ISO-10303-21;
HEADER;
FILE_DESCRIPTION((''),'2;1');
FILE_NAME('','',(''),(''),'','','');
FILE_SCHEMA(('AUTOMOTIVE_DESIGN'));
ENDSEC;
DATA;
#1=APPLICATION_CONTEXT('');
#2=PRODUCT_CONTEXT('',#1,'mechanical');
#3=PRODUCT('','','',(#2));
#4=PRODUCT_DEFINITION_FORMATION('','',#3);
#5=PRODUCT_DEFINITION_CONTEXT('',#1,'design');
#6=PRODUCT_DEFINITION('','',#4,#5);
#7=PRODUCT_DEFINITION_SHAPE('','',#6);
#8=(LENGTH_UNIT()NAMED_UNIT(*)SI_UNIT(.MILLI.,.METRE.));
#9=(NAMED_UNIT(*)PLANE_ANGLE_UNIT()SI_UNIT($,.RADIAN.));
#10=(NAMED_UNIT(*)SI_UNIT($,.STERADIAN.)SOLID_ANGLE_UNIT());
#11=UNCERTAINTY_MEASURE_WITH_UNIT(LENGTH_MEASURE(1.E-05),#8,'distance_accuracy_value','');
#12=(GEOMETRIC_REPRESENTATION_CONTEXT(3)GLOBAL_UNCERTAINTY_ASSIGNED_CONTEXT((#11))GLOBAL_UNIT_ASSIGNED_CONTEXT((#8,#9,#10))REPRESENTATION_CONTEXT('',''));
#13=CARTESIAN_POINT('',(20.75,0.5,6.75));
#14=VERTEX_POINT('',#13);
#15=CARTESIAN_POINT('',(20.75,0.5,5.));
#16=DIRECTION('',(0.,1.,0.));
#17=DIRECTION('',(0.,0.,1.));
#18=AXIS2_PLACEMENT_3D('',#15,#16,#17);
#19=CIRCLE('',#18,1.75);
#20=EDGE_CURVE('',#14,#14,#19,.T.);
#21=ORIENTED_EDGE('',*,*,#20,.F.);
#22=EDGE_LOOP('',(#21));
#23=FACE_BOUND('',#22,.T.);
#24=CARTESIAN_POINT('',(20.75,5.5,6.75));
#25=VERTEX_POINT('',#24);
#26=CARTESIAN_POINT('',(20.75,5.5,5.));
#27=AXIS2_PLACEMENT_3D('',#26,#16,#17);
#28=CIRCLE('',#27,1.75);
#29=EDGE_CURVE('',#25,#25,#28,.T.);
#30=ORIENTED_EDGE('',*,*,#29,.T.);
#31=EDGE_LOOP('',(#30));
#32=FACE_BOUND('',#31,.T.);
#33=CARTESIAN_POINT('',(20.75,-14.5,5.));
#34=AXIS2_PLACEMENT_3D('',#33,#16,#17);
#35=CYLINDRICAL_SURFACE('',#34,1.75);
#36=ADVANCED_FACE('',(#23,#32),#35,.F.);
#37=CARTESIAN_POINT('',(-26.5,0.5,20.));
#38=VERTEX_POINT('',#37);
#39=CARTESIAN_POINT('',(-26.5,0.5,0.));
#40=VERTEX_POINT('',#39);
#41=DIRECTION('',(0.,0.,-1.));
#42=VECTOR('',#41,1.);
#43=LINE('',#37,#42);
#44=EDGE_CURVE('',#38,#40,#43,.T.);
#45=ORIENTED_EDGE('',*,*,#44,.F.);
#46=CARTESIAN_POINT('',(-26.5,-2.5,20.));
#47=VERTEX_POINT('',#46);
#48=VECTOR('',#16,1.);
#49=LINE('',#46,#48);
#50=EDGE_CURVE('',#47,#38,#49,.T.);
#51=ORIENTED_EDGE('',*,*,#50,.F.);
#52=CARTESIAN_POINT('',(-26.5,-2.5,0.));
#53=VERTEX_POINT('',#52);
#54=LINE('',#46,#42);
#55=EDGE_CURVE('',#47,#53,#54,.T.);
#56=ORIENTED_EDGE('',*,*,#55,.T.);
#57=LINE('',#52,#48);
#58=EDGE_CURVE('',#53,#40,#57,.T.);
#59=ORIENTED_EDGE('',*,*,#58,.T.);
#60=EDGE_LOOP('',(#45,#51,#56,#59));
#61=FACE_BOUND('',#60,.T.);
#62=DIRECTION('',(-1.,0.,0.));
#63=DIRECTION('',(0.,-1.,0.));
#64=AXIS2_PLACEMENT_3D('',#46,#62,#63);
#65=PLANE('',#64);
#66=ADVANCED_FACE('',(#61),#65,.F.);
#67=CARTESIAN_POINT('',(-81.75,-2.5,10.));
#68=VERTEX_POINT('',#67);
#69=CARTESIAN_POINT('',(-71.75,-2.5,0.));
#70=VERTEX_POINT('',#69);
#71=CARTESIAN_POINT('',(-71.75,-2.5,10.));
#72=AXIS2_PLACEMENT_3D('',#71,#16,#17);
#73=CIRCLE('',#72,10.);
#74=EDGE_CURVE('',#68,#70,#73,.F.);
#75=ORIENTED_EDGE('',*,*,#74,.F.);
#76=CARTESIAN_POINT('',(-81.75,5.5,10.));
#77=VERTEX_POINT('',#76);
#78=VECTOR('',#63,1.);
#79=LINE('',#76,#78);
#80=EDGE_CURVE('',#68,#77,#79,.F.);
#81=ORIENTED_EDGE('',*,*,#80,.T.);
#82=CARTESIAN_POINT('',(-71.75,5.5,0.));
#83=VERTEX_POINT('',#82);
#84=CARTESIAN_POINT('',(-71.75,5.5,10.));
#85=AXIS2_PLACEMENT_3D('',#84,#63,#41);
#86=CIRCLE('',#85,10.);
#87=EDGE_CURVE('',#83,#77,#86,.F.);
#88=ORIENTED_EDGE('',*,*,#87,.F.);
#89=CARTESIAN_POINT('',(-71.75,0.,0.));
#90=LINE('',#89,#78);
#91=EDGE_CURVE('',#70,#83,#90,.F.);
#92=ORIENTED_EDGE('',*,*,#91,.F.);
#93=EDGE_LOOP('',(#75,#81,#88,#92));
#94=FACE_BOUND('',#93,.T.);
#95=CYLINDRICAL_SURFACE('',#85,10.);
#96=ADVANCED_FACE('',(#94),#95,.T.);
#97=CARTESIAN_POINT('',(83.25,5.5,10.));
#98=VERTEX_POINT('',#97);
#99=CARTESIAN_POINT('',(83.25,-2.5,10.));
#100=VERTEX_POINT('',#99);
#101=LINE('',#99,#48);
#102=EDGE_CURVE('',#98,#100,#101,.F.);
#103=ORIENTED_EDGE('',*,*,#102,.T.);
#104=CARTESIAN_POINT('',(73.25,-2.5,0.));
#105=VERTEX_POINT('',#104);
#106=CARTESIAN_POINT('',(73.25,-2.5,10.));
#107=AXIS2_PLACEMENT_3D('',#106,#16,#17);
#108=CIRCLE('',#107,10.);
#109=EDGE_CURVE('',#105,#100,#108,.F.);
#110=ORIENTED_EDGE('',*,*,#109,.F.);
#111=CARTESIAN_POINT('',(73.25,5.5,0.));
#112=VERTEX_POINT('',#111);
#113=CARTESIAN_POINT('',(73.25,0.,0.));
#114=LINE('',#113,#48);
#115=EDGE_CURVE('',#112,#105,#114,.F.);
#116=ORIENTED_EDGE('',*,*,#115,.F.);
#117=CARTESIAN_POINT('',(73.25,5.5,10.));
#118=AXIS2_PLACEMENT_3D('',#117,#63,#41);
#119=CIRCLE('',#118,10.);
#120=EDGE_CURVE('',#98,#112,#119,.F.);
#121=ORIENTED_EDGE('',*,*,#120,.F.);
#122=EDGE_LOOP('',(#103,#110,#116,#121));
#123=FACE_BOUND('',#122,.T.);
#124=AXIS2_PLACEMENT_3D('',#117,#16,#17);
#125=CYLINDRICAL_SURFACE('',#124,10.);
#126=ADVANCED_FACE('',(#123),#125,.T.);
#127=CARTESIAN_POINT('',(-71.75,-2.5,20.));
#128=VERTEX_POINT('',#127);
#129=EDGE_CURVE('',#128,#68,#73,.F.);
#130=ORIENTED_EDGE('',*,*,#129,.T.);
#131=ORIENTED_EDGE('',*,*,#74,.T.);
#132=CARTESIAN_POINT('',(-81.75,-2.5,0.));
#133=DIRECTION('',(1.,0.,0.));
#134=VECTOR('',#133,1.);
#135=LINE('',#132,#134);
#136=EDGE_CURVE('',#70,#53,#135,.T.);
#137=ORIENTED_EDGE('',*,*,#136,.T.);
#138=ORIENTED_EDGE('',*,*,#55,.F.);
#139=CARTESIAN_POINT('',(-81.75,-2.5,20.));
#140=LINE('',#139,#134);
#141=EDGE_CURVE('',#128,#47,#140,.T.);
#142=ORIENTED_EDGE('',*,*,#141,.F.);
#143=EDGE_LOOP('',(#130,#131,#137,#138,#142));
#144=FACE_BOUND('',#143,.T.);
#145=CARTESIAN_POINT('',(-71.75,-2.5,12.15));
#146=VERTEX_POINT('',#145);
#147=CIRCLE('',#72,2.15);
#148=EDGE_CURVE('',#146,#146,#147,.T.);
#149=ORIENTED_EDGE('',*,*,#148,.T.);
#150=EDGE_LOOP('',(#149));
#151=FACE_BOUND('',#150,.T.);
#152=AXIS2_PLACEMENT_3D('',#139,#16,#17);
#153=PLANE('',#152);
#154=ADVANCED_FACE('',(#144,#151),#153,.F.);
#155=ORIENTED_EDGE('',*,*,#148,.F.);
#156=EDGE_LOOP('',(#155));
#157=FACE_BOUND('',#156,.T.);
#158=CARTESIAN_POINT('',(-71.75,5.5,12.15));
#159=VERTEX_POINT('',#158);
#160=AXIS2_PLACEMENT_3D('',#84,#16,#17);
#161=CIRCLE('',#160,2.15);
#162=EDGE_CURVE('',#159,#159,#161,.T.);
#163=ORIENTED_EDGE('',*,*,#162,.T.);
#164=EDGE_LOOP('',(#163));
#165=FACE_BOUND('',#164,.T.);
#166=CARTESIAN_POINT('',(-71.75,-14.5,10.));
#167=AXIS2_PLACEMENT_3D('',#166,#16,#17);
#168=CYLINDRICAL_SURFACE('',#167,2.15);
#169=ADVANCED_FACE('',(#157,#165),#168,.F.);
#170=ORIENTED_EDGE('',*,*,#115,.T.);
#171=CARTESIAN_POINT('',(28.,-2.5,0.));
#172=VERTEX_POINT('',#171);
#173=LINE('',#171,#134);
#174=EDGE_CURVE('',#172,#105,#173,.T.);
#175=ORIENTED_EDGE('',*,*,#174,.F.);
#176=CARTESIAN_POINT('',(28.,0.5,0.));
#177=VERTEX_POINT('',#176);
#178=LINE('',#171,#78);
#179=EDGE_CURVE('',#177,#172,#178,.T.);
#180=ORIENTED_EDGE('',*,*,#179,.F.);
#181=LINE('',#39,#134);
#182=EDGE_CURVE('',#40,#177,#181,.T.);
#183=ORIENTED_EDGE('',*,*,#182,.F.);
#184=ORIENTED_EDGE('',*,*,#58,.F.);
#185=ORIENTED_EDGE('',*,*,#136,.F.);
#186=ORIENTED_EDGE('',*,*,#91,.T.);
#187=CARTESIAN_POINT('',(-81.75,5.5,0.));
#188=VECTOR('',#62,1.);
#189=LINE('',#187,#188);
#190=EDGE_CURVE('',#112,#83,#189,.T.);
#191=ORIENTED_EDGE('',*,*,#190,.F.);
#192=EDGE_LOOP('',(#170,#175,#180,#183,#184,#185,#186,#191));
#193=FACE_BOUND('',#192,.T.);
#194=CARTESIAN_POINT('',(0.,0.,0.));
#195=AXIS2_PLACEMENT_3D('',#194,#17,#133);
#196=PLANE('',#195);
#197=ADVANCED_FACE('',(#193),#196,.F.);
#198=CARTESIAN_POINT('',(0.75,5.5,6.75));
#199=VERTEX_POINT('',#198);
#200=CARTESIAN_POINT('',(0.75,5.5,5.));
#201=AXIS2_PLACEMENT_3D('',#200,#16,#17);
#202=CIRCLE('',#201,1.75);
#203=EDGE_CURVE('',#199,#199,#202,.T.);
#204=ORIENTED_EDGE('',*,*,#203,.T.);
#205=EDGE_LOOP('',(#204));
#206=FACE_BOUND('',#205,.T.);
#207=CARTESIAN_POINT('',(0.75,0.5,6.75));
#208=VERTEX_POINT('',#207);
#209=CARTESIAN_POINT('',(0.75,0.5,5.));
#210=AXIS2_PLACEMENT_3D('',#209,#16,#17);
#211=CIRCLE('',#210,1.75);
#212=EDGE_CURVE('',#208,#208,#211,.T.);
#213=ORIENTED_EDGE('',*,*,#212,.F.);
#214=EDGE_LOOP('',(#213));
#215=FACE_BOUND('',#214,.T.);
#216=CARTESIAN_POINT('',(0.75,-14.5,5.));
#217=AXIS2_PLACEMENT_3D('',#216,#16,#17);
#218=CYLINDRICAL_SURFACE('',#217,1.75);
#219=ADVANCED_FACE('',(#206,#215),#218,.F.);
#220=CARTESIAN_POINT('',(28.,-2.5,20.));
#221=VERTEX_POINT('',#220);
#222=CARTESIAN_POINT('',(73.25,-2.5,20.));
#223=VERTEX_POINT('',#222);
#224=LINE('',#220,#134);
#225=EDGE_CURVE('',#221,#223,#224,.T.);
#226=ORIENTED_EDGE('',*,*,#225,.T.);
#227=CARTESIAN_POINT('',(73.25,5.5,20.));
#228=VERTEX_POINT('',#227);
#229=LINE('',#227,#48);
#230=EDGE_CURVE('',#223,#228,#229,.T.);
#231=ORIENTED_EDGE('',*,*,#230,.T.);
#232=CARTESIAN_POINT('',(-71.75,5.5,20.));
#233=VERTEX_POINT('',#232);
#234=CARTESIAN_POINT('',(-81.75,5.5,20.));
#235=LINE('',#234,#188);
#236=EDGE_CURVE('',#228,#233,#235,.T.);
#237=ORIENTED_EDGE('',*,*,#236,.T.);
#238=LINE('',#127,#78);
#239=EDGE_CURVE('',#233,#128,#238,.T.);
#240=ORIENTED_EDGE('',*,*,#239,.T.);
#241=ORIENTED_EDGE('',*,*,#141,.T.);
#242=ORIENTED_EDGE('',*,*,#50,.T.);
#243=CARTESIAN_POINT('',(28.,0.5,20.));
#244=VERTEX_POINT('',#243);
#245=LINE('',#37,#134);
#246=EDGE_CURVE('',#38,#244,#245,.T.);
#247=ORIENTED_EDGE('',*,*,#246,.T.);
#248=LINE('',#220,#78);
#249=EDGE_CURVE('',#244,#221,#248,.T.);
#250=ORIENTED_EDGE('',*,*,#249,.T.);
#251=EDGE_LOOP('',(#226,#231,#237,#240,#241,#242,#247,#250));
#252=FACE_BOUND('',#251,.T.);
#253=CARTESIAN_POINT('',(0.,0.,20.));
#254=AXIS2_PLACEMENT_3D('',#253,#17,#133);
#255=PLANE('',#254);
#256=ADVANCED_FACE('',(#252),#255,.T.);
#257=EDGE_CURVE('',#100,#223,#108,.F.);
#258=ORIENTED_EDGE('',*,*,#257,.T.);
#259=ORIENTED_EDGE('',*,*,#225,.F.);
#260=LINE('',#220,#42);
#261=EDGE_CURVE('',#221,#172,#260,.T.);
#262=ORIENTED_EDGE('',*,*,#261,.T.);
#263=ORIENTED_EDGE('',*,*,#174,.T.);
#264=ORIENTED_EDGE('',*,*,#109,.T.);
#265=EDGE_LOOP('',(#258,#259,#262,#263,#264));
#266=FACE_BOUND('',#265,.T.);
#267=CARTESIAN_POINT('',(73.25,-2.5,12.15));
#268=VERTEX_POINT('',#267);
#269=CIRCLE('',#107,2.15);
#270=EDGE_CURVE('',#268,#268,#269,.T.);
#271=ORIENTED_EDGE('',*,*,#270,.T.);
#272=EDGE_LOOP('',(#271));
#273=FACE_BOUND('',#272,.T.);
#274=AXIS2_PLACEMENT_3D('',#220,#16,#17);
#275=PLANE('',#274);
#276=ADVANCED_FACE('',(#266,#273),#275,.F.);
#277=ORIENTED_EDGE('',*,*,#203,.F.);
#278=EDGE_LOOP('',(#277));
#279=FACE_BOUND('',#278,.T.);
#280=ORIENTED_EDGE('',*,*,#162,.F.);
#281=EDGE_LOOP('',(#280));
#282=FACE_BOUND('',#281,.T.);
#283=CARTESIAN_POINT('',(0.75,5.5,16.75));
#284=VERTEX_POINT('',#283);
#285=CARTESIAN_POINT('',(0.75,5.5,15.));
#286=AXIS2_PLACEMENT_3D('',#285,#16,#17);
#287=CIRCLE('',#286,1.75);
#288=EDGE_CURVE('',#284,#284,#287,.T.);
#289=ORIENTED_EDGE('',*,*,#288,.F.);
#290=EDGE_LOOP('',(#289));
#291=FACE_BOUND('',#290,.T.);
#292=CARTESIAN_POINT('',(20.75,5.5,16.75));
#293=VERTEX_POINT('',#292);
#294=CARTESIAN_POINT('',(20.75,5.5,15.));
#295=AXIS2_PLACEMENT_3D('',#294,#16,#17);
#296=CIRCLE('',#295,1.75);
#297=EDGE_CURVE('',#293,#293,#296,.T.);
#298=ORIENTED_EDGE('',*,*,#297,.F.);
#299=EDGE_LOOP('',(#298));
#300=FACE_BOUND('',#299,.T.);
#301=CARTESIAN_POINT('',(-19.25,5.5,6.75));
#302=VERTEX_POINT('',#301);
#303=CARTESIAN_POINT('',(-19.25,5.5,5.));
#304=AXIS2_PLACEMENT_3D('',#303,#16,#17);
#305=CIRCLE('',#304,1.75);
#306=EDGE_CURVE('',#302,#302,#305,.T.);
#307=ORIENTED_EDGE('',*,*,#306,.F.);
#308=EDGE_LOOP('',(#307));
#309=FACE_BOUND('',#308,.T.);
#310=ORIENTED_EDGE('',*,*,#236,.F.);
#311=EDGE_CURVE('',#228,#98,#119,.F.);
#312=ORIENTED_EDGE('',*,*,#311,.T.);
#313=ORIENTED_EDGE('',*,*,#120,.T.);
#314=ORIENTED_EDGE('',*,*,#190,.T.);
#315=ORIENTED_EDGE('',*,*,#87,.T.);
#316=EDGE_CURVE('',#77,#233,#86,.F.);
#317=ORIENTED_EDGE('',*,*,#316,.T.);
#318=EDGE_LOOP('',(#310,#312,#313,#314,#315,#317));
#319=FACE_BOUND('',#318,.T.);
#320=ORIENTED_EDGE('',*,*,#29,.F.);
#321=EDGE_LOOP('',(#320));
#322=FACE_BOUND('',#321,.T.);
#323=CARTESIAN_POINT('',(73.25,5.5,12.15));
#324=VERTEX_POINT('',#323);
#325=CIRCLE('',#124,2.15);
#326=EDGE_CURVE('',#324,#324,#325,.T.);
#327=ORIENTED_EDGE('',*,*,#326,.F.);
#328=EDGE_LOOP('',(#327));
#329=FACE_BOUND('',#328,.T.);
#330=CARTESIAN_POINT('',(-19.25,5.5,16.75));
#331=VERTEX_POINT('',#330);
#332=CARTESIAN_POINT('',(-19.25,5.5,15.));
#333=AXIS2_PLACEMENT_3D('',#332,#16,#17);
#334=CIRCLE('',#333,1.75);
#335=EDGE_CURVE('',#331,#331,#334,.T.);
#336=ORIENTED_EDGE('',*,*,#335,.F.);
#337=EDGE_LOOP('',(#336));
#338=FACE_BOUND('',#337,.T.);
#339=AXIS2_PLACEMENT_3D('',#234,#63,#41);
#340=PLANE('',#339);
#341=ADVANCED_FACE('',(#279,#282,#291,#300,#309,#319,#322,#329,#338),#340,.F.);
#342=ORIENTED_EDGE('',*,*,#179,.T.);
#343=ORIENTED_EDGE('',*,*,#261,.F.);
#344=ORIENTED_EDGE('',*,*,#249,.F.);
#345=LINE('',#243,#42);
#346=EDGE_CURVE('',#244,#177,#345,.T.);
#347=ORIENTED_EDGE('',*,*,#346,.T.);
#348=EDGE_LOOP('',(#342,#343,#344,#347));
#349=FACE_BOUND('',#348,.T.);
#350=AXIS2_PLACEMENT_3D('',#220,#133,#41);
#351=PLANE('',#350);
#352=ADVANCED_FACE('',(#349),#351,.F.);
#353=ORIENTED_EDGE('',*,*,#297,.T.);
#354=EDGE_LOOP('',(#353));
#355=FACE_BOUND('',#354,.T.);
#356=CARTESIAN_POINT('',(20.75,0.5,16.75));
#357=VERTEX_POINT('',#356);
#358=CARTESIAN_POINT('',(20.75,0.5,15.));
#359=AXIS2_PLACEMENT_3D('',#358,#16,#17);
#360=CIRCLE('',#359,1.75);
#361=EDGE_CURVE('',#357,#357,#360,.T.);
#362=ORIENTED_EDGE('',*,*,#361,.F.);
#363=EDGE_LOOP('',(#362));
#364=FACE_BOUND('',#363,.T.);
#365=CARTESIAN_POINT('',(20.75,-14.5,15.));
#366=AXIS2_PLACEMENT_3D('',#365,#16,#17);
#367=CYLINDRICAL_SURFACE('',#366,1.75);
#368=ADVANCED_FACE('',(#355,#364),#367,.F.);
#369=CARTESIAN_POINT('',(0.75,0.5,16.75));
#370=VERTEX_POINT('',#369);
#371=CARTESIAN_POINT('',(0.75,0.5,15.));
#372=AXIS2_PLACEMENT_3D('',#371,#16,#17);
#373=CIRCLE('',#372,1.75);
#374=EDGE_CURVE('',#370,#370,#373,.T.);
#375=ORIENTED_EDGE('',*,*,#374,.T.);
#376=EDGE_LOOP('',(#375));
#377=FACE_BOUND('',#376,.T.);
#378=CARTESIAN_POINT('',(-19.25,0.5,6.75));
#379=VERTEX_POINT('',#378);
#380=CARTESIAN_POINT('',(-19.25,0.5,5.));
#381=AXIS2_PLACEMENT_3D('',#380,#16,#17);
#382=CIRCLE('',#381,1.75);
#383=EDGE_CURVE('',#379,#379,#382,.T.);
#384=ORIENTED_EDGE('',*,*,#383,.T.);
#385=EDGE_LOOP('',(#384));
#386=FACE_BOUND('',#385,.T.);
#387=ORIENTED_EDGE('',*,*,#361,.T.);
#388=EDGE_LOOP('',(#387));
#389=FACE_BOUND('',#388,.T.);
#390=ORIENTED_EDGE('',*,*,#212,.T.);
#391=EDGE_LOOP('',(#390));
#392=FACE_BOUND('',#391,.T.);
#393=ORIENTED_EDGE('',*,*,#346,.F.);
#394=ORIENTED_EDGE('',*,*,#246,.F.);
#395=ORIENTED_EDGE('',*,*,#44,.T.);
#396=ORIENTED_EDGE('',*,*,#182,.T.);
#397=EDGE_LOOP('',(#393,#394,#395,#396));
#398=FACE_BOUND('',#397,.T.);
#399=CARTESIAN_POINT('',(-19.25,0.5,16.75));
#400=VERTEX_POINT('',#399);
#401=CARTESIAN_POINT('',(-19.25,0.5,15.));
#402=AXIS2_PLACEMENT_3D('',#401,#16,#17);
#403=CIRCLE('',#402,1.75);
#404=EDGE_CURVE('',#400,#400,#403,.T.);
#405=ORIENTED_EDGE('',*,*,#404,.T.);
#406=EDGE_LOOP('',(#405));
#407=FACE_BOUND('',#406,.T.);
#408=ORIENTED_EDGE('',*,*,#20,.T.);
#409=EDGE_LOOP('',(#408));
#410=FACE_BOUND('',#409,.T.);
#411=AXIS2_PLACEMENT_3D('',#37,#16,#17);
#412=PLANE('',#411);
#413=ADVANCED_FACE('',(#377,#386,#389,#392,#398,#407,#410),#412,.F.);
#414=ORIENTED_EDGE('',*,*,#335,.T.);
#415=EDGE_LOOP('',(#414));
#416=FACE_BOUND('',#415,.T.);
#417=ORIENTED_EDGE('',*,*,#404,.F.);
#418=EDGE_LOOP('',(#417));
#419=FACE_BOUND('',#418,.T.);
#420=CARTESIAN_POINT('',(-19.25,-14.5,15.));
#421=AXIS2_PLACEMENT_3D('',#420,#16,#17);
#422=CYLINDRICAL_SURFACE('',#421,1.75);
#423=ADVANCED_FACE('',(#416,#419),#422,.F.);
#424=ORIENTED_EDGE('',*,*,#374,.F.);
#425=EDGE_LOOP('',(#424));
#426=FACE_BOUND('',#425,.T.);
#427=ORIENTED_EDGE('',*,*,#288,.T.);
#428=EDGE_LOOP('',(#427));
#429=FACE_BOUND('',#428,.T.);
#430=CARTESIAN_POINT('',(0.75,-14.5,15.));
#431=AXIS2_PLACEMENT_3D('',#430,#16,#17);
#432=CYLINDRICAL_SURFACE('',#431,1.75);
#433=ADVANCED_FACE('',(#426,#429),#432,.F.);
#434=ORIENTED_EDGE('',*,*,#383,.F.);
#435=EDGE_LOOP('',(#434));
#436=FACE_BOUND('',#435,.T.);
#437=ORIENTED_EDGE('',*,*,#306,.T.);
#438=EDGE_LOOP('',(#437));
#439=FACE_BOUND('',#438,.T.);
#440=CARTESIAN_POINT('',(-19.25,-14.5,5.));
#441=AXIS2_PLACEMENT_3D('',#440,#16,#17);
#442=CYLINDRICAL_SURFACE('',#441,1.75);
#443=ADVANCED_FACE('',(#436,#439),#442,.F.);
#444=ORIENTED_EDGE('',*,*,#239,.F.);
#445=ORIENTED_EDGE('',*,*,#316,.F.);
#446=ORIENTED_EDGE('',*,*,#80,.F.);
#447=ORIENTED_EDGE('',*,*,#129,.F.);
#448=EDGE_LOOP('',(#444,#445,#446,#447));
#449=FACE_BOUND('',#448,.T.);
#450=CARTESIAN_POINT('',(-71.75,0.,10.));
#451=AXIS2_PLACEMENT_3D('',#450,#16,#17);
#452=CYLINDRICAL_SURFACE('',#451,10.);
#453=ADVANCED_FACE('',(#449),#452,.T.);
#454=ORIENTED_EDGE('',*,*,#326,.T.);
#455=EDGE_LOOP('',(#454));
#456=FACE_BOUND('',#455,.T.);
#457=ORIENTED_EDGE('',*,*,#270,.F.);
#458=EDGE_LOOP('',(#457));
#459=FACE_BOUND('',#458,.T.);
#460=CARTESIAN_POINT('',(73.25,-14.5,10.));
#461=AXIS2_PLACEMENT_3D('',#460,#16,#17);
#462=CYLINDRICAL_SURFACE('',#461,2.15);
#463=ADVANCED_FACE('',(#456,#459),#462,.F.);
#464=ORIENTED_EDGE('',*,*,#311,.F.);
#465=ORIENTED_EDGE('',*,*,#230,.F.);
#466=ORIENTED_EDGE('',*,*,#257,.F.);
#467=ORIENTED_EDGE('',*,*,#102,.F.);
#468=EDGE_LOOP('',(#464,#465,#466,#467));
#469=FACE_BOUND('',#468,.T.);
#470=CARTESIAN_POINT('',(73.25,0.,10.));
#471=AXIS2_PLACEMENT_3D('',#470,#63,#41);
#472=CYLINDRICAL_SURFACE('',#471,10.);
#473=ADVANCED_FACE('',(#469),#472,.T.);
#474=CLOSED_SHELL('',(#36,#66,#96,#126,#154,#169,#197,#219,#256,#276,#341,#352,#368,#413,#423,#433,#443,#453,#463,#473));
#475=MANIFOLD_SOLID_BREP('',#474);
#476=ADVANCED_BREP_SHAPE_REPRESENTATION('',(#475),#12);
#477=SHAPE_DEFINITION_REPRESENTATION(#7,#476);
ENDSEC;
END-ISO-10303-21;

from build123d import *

# Parameters (mm, degrees)
EXTRUDE_1_DEPTH     = 20
SKETCH_2_R          = 2.15
SKETCH_2_R_2        = 1.75
CUT_EXTRUDE_1_DEPTH = 20
FILLET_1_R          = 10


with BuildPart() as part:
    # 스케치1 → 보스-돌출1 (new body)
    with BuildSketch(Plane.XY):
        Polygon((28, -2.5), (83.25, -2.5), (83.25, 5.5), (-81.75, 5.5), (-81.75, -2.5), (-26.5, -2.5), (-26.5, 0.5), (28, 0.5), align=None)
    extrude(amount=EXTRUDE_1_DEPTH)

    # 스케치2 → 컷-돌출1 (cut)
    with BuildSketch(Plane(origin=(0, 5.5, 0), x_dir=(1, 0, 0), z_dir=(0, 1, 0))):
        with Locations(Location((-71.75, -10, 0), (0, 0, 270))):
            Circle(SKETCH_2_R)
        with Locations(Location((73.25, -10, 0), (0, 0, 270))):
            Circle(SKETCH_2_R)
        with Locations(Location((-19.25, -5, 0), (0, 0, 270))):
            Circle(SKETCH_2_R_2)
        with Locations(Location((0.75, -5, 0), (0, 0, 270))):
            Circle(SKETCH_2_R_2)
        with Locations(Location((20.75, -5, 0), (0, 0, 270))):
            Circle(SKETCH_2_R_2)
        with Locations(Location((20.75, -15, 0), (0, 0, 270))):
            Circle(SKETCH_2_R_2)
        with Locations(Location((0.75, -15, 0), (0, 0, 270))):
            Circle(SKETCH_2_R_2)
        with Locations(Location((-19.25, -15, 0), (0, 0, 270))):
            Circle(SKETCH_2_R_2)
    extrude(amount=-CUT_EXTRUDE_1_DEPTH, mode=Mode.SUBTRACT)

    # 필렛1
    fillet_1_edges = [part.edges().sort_by_distance(p)[0] for p in [
        (83.25, 1.5, 0),
        (83.25, 1.5, 20),
        (-81.75, 1.5, 0),
        (-81.75, 1.5, 20),
    ]]
    fillet(fillet_1_edges, radius=FILLET_1_R - 0.0001)  # a hair under: the kernel refuses the full size


solid = part.part
